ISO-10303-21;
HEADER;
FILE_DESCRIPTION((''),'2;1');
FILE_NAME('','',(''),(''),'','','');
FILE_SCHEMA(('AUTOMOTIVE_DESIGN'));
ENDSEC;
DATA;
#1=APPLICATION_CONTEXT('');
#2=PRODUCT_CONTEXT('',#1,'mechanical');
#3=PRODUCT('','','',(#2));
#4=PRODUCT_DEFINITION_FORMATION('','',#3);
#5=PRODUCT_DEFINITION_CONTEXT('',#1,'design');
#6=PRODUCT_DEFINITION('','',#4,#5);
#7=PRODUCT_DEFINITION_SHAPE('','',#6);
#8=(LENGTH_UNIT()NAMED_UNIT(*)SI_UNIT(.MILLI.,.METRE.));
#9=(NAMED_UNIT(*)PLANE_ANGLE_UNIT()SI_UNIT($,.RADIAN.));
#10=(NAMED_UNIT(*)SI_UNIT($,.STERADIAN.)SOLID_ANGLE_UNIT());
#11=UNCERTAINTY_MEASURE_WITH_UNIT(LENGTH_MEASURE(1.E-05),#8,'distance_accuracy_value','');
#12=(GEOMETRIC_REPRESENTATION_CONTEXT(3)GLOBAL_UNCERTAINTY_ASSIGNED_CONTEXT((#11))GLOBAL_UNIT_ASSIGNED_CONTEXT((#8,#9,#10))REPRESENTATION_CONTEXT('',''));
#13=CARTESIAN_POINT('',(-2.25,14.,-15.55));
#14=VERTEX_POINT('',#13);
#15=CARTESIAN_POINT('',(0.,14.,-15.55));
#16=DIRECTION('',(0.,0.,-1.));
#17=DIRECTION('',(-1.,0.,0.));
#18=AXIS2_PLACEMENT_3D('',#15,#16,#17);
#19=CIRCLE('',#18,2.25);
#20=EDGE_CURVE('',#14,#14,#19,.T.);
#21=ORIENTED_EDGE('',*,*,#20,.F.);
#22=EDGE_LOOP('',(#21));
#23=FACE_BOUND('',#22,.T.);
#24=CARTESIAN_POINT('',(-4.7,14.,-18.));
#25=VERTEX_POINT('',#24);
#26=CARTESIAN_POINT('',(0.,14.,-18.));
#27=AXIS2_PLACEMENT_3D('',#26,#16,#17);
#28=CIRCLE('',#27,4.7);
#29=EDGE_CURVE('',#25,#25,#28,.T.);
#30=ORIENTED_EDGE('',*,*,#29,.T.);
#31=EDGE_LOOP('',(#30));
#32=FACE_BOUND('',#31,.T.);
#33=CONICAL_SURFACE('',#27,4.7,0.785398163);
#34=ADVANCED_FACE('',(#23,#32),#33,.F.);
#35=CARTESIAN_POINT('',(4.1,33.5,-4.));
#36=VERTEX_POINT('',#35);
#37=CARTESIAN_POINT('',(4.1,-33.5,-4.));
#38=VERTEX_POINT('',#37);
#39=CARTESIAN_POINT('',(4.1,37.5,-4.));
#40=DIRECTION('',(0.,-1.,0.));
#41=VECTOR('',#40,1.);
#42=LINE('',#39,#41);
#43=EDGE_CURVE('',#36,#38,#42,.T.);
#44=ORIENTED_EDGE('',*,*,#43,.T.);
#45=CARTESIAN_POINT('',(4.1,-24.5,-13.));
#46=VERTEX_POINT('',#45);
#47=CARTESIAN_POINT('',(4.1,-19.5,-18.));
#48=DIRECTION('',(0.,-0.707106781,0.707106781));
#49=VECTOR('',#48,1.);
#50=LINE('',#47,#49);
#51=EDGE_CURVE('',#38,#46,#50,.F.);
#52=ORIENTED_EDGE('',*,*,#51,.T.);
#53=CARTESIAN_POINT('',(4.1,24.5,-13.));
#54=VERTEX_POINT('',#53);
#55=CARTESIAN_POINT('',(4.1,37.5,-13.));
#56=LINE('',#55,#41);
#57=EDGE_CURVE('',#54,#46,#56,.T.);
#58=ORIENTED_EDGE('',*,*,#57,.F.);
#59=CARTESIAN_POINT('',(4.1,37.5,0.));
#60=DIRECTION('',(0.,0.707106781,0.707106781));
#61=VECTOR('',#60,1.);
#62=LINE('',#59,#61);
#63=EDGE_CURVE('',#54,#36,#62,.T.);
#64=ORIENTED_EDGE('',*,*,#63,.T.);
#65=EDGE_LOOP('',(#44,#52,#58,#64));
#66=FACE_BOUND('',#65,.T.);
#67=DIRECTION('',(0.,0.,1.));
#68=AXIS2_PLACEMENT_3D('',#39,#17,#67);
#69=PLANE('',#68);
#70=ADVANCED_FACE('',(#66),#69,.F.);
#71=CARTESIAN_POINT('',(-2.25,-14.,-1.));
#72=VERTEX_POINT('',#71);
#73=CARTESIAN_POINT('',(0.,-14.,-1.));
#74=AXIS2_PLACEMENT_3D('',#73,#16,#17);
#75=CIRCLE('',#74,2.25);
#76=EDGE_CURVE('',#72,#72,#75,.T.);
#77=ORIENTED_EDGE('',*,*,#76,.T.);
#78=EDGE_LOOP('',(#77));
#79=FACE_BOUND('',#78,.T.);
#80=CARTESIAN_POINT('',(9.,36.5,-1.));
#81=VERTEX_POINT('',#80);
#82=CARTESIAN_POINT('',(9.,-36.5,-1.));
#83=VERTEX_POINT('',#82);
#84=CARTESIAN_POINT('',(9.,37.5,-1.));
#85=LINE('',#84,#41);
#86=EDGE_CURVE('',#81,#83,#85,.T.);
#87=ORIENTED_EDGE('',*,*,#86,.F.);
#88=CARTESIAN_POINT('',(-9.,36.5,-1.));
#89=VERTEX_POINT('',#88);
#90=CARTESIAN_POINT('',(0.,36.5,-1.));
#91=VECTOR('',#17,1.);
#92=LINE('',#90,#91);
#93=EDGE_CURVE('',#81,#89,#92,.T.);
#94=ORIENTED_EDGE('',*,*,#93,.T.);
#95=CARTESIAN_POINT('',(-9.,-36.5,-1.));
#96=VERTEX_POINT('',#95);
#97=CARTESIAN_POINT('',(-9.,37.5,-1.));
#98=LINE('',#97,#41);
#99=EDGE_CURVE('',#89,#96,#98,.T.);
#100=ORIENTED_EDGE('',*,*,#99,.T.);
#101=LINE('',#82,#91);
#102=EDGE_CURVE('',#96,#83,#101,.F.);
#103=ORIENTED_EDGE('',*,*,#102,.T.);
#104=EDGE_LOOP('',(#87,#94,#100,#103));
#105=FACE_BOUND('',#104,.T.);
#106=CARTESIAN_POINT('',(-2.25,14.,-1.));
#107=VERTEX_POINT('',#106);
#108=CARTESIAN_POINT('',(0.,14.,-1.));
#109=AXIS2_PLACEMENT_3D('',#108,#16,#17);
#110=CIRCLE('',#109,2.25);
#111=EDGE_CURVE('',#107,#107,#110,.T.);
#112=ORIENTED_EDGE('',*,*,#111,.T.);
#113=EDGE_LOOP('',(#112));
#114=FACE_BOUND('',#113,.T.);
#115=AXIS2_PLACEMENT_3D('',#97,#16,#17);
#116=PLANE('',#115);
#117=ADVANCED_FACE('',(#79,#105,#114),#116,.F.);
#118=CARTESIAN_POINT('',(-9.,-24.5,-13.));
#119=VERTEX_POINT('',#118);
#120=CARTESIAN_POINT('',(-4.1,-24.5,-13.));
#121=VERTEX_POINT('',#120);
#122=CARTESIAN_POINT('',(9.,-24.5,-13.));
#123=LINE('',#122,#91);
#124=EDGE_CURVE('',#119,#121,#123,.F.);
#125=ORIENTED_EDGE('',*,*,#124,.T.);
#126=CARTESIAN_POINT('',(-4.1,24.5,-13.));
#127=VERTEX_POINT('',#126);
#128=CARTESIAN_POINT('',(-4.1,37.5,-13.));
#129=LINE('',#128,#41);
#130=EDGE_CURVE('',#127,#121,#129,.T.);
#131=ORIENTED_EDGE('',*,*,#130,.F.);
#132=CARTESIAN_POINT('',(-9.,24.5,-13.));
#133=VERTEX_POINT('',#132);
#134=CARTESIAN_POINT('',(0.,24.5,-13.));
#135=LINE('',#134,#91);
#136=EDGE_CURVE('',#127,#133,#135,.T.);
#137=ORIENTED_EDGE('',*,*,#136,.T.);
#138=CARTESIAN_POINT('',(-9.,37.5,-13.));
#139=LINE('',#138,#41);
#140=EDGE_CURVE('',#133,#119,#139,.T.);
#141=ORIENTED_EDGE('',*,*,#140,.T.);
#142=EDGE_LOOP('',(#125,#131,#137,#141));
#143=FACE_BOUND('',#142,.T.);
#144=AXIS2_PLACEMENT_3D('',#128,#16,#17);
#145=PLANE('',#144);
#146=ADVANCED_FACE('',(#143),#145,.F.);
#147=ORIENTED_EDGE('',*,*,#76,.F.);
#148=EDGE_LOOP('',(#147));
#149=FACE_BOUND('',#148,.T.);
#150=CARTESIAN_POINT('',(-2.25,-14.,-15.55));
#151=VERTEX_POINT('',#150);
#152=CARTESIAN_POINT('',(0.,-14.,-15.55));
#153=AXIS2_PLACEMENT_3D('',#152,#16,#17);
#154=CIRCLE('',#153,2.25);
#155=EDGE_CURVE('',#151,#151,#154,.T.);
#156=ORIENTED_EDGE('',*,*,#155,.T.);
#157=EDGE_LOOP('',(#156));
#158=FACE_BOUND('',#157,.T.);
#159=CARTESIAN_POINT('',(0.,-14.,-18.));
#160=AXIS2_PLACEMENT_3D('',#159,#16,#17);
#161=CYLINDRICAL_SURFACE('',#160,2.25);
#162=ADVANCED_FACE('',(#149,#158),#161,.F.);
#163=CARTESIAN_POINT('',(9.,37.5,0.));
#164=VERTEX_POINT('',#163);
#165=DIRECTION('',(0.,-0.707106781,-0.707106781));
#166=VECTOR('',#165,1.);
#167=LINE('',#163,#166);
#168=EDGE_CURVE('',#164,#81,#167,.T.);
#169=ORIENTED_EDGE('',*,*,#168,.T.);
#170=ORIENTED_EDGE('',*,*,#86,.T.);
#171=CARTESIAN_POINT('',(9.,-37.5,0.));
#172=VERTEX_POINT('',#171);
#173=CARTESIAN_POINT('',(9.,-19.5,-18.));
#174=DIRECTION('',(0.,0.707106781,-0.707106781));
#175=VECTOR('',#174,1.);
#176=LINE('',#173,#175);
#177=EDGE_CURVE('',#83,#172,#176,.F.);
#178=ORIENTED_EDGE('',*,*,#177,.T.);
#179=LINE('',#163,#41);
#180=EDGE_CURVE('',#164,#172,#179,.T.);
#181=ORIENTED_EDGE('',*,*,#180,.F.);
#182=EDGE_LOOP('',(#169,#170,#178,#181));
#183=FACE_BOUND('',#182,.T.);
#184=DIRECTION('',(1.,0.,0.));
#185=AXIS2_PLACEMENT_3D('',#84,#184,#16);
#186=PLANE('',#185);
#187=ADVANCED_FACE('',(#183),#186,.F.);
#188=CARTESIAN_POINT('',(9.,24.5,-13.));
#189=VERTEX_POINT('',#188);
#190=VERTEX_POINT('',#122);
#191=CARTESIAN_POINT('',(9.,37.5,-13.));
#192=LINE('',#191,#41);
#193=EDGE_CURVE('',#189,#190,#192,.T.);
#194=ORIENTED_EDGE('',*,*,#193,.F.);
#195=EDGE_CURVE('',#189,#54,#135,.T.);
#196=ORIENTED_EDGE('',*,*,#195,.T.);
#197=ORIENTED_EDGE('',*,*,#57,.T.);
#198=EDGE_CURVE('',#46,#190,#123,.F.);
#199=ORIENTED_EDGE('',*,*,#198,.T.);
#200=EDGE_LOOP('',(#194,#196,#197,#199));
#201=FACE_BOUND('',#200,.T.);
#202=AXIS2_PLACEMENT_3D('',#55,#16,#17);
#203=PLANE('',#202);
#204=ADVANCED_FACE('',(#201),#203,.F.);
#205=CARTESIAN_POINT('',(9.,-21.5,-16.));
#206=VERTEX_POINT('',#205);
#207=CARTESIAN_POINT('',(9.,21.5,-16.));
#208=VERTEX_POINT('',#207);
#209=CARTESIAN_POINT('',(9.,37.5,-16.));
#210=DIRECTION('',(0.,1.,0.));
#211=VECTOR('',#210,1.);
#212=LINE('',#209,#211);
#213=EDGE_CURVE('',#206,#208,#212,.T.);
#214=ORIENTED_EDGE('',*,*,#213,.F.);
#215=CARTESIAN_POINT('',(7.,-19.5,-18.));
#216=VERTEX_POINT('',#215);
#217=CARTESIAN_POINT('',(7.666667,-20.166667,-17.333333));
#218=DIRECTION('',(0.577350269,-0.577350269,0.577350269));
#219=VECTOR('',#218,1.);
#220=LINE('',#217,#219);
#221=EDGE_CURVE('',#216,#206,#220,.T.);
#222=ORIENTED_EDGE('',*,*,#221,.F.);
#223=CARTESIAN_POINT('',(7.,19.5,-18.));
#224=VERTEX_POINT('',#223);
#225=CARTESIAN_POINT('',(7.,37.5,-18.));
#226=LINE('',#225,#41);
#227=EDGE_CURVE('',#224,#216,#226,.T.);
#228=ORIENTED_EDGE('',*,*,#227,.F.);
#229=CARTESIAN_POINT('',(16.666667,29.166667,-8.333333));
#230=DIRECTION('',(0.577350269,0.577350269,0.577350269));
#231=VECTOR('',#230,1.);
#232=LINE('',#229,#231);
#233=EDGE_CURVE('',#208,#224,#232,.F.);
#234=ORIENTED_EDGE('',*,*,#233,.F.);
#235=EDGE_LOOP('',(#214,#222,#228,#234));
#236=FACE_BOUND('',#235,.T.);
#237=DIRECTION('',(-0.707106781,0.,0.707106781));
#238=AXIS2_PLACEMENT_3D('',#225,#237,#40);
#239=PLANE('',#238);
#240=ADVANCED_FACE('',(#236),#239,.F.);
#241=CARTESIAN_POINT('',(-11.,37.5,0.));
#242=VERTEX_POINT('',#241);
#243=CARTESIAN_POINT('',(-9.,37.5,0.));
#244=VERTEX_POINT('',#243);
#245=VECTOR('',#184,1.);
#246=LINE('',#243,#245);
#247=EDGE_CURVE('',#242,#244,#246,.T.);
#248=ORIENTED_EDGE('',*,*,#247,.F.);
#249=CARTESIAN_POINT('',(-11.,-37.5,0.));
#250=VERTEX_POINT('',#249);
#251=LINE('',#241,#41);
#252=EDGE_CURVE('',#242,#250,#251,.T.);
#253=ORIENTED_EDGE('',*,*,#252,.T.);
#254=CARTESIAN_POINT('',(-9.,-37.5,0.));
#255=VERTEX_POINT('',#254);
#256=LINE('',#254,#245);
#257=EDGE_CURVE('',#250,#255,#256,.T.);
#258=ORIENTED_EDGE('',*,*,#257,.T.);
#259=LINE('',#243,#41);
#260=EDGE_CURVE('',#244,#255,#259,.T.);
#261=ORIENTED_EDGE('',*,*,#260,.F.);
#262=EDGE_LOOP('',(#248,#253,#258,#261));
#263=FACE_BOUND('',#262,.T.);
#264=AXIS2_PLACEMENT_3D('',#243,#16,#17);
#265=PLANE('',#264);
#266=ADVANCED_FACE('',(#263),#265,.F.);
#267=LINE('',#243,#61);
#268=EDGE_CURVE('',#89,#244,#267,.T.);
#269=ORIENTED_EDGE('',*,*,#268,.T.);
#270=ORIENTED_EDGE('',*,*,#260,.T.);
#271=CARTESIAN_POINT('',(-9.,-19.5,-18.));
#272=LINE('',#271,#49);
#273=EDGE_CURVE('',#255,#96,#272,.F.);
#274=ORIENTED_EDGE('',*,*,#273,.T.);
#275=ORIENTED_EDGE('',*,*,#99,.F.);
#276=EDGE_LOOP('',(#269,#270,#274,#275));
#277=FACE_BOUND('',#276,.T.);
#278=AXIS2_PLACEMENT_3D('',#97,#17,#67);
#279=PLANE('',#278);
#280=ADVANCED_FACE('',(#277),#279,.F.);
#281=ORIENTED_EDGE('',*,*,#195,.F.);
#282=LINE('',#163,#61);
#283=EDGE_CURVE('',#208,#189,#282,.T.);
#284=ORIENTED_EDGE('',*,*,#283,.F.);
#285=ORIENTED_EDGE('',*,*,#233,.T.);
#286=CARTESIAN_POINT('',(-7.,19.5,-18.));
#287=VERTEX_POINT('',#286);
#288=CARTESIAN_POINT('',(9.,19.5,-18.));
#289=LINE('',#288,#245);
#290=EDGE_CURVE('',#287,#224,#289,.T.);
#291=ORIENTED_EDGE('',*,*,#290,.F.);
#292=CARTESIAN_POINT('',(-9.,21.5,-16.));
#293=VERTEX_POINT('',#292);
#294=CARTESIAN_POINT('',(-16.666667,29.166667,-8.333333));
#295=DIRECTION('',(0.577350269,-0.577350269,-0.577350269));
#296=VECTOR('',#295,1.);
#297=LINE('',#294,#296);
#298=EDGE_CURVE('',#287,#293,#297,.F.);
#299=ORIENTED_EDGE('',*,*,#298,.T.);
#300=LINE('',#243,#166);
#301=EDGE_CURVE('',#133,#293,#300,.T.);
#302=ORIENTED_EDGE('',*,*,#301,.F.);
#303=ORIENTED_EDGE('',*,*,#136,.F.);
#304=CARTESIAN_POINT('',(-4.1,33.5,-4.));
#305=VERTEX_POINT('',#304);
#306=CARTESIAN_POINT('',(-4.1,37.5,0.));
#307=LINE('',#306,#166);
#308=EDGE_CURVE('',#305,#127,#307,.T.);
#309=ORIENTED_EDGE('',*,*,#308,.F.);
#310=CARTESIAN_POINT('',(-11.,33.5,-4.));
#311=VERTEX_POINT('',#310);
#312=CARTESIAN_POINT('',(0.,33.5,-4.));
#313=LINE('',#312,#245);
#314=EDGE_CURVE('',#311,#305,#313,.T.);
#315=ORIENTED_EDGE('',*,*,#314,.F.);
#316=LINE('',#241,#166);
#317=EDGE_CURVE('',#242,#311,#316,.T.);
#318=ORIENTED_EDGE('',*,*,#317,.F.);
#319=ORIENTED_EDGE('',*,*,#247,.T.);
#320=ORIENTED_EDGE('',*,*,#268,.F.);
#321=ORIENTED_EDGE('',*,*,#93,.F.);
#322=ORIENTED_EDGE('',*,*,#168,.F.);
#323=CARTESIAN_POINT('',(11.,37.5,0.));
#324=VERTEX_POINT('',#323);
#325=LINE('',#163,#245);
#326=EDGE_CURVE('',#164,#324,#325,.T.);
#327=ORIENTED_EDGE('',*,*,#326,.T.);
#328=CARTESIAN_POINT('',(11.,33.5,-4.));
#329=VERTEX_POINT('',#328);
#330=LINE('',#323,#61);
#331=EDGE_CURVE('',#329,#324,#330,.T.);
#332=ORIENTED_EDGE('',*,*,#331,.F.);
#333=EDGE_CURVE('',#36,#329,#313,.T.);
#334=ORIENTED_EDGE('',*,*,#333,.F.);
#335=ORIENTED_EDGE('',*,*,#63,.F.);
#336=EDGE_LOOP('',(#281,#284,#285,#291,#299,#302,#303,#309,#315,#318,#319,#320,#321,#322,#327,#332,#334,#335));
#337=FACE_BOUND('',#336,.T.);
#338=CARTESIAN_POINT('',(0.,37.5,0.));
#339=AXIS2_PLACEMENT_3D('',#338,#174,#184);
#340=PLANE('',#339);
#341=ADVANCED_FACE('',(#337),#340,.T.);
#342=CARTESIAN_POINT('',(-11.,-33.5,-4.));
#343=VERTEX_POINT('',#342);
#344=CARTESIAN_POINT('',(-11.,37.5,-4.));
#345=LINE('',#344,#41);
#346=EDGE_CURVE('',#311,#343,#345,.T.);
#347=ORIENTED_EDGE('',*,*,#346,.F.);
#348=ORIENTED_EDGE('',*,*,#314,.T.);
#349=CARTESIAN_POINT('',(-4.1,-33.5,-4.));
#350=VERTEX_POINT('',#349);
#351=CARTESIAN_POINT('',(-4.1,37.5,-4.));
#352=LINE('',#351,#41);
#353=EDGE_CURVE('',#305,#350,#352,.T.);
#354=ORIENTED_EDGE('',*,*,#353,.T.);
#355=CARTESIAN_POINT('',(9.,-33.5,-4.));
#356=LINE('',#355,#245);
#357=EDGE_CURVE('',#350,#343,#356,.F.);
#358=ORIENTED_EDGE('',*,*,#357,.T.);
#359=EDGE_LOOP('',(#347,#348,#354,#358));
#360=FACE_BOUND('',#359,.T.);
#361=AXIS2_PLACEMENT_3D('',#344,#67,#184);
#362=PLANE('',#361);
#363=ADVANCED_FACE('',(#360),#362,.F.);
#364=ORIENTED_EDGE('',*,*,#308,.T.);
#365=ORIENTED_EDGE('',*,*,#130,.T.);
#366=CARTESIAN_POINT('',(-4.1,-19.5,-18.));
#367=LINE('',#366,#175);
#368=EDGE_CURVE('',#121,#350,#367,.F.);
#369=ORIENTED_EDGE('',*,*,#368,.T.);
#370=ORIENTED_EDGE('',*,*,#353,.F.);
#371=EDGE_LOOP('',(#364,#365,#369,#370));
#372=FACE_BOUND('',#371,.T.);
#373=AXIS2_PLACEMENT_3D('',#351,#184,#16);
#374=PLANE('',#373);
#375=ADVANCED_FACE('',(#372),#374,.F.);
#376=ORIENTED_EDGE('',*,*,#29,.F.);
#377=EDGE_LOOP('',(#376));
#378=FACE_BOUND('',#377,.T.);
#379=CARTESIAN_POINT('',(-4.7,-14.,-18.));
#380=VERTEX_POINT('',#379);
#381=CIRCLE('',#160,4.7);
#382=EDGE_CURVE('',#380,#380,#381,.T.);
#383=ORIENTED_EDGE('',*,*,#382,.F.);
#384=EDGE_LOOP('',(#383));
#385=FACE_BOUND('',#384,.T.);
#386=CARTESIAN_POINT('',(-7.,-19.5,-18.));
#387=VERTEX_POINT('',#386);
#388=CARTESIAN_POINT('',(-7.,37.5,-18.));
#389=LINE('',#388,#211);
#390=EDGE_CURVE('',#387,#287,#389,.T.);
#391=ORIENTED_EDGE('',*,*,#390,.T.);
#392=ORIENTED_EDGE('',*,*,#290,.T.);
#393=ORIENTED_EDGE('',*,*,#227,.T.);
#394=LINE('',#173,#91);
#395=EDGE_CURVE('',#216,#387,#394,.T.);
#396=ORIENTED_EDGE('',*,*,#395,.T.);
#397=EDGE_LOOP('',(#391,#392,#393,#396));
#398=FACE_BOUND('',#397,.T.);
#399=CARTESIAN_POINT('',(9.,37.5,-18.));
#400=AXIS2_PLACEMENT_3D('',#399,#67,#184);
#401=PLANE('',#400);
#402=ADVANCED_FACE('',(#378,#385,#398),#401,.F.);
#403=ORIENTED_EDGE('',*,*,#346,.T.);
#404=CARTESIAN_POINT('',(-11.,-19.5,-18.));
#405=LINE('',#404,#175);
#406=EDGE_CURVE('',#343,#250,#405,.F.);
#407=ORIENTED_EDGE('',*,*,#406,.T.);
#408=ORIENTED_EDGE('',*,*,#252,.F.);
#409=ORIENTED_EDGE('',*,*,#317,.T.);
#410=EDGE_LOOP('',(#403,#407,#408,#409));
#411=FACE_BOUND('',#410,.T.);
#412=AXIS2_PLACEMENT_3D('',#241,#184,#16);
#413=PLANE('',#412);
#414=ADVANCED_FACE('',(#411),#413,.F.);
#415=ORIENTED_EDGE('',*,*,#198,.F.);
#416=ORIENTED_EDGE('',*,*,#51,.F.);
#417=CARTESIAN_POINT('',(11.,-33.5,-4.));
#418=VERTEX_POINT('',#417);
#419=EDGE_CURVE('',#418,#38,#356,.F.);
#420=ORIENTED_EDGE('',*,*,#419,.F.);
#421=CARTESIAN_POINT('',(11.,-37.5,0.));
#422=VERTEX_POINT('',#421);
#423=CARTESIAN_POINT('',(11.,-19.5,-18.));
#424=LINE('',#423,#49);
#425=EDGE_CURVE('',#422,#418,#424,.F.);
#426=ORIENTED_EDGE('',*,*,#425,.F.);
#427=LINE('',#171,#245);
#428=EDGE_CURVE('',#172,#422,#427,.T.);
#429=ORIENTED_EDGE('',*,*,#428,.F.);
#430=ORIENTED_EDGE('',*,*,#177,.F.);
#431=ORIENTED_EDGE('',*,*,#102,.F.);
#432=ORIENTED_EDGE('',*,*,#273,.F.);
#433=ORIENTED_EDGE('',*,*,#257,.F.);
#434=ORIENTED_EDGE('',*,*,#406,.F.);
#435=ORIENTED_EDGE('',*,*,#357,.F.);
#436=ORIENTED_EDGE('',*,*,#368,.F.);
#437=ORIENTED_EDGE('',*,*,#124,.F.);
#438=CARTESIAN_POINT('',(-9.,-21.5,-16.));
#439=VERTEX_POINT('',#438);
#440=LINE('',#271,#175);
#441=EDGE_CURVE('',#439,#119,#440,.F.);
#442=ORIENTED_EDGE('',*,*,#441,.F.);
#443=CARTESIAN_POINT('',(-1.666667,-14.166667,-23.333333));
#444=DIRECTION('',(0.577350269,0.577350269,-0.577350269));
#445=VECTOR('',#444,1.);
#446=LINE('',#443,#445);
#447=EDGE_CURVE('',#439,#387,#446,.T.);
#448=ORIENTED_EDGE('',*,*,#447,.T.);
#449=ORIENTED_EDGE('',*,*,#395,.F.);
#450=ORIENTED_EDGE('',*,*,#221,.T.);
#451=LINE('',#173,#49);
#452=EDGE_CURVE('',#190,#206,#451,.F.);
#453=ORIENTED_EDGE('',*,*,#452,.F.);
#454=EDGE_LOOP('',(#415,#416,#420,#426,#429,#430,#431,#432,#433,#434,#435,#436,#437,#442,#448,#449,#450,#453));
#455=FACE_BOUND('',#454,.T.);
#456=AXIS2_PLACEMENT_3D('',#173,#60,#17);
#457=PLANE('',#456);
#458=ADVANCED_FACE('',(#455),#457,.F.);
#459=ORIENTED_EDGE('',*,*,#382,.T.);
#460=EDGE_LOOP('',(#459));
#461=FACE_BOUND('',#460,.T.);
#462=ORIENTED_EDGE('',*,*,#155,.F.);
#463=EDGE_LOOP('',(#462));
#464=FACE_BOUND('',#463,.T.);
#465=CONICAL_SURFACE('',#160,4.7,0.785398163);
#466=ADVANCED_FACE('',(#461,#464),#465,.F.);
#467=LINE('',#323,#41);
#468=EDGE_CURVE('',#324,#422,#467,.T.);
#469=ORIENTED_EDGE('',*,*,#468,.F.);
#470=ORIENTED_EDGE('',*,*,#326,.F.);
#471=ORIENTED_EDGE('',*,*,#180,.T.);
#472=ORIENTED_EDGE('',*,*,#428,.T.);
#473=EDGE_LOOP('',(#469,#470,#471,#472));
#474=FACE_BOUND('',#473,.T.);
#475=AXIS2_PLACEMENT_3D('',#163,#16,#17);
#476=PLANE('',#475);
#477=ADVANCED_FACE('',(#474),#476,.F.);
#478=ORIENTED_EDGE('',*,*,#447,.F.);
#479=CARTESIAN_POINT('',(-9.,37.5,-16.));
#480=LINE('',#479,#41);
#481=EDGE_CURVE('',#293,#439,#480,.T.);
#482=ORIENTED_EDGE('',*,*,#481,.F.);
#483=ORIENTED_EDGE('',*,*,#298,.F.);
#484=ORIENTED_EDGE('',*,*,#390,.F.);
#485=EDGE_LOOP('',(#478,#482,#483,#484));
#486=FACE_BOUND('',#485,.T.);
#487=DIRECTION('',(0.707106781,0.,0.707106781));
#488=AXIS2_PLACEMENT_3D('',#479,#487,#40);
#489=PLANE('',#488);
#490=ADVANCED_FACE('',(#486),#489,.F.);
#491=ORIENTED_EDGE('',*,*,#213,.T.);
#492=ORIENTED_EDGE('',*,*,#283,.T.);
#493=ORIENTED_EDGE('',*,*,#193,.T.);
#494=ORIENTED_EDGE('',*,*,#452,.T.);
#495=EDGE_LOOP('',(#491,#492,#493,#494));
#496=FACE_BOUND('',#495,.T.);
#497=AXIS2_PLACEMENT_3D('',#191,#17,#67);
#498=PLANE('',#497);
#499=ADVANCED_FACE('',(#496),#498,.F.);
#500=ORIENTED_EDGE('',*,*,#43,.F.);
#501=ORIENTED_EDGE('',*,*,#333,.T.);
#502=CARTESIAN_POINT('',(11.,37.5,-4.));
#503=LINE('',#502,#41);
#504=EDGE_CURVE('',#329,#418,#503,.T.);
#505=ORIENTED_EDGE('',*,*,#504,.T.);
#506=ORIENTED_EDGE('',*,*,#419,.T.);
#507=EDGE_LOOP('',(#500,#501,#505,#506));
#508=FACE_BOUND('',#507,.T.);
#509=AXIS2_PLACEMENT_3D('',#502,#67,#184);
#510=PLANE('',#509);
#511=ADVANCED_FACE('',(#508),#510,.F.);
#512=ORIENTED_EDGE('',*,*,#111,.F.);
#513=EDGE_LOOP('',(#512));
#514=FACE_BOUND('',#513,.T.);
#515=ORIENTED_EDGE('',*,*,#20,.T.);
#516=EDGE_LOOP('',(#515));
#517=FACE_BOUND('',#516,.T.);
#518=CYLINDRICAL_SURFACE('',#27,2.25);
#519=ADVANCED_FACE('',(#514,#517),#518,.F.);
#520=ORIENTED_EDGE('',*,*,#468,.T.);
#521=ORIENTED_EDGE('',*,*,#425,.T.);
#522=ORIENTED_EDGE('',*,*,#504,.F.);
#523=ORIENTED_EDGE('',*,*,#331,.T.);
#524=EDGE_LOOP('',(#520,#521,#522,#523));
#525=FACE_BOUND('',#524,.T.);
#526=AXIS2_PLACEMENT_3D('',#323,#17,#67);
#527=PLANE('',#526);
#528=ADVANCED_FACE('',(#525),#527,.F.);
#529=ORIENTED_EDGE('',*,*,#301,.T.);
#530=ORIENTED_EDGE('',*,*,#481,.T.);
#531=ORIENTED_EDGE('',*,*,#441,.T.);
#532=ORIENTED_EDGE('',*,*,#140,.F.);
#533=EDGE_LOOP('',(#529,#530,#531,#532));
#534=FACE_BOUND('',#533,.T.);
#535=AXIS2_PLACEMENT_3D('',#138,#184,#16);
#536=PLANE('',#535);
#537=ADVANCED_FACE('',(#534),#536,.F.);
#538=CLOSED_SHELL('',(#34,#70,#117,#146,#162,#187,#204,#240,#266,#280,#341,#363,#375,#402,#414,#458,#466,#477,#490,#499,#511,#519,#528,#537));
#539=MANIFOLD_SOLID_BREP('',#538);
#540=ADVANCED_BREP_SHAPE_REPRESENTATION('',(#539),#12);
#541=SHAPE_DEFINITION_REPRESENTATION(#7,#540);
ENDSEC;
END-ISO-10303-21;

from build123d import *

# Parameters (mm, degrees)
BOSS_EXTRUDE1_DEPTH                                 = 37.5
CHAMFER1_SIZE                                       = 18
CHAMFER2_SIZE                                       = 2
CSK_FOR_M4_COUNTERSUNK_FLAT_HEAD_SCREW1_D           = 4.5
CSK_FOR_M4_COUNTERSUNK_FLAT_HEAD_SCREW1_CSINK_D     = 9.4
CSK_FOR_M4_COUNTERSUNK_FLAT_HEAD_SCREW1_CSINK_ANGLE = 90


with BuildPart() as part:
    # Sketch1 → Boss-Extrude1 (new, symmetric)
    with BuildSketch(Plane(origin=(0, 0, 0), x_dir=(1, 0, 0), z_dir=(0, 1, 0))):
        Polygon((-9, 1), (9, 1), (9, 0), (11, 0), (11, 4), (4.1, 4), (4.1, 13), (9, 13), (9, 18), (-9, 18), (-9, 13), (-4.1, 13), (-4.1, 4), (-11, 4), (-11, 0), (-9, 0), align=None)
    extrude(amount=BOSS_EXTRUDE1_DEPTH, both=True)

    # Chamfer1
    # the kernel refuses this chamfer: 18 mm, written as the material it takes off along each edge
    with BuildSketch(Plane(origin=(55.290293783, -37.5, -18), x_dir=(0, 0.9996219169112966, -0.02749587661058639), z_dir=(-1, 0, 0))) as chamfer1_piece_1:
        Polygon((CHAMFER1_SIZE * 0.999621916911, -CHAMFER1_SIZE * 0.0274958766106), (-CHAMFER1_SIZE * 0.0274958766106, -CHAMFER1_SIZE * 0.999621916911), (0, 0), align=None)
    extrude(amount=110.580587567, mode=Mode.SUBTRACT)
    with BuildSketch(Plane(origin=(55.290293783, 37.5, -18), x_dir=(0, -0.9996219169112966, -0.02749587661058639), z_dir=(-1, 0, 0))) as chamfer1_piece_2:
        Polygon((CHAMFER1_SIZE * 0.999621916911, CHAMFER1_SIZE * 0.0274958766106), (-CHAMFER1_SIZE * 0.0274958766106, CHAMFER1_SIZE * 0.999621916911), (0, 0), align=None)
    extrude(amount=110.580587567, mode=Mode.SUBTRACT)

    # Chamfer2
    chamfer2_edges = [part.edges().sort_by_distance(p)[0] for p in [
        (-9, 0, -18),
        (9, 0, -18),
    ]]
    chamfer(chamfer2_edges, length=CHAMFER2_SIZE)

    # CSK for M4 Countersunk Flat Head Screw1 (through all)
    with Locations(Plane(origin=(0, 0, -18), x_dir=(-1, 0, 0), z_dir=(0, 0, -1))):
        with Locations((0, 14), (0, -14)):
            CounterSinkHole(CSK_FOR_M4_COUNTERSUNK_FLAT_HEAD_SCREW1_D / 2, CSK_FOR_M4_COUNTERSUNK_FLAT_HEAD_SCREW1_CSINK_D / 2, counter_sink_angle=CSK_FOR_M4_COUNTERSUNK_FLAT_HEAD_SCREW1_CSINK_ANGLE)


solid = part.part
